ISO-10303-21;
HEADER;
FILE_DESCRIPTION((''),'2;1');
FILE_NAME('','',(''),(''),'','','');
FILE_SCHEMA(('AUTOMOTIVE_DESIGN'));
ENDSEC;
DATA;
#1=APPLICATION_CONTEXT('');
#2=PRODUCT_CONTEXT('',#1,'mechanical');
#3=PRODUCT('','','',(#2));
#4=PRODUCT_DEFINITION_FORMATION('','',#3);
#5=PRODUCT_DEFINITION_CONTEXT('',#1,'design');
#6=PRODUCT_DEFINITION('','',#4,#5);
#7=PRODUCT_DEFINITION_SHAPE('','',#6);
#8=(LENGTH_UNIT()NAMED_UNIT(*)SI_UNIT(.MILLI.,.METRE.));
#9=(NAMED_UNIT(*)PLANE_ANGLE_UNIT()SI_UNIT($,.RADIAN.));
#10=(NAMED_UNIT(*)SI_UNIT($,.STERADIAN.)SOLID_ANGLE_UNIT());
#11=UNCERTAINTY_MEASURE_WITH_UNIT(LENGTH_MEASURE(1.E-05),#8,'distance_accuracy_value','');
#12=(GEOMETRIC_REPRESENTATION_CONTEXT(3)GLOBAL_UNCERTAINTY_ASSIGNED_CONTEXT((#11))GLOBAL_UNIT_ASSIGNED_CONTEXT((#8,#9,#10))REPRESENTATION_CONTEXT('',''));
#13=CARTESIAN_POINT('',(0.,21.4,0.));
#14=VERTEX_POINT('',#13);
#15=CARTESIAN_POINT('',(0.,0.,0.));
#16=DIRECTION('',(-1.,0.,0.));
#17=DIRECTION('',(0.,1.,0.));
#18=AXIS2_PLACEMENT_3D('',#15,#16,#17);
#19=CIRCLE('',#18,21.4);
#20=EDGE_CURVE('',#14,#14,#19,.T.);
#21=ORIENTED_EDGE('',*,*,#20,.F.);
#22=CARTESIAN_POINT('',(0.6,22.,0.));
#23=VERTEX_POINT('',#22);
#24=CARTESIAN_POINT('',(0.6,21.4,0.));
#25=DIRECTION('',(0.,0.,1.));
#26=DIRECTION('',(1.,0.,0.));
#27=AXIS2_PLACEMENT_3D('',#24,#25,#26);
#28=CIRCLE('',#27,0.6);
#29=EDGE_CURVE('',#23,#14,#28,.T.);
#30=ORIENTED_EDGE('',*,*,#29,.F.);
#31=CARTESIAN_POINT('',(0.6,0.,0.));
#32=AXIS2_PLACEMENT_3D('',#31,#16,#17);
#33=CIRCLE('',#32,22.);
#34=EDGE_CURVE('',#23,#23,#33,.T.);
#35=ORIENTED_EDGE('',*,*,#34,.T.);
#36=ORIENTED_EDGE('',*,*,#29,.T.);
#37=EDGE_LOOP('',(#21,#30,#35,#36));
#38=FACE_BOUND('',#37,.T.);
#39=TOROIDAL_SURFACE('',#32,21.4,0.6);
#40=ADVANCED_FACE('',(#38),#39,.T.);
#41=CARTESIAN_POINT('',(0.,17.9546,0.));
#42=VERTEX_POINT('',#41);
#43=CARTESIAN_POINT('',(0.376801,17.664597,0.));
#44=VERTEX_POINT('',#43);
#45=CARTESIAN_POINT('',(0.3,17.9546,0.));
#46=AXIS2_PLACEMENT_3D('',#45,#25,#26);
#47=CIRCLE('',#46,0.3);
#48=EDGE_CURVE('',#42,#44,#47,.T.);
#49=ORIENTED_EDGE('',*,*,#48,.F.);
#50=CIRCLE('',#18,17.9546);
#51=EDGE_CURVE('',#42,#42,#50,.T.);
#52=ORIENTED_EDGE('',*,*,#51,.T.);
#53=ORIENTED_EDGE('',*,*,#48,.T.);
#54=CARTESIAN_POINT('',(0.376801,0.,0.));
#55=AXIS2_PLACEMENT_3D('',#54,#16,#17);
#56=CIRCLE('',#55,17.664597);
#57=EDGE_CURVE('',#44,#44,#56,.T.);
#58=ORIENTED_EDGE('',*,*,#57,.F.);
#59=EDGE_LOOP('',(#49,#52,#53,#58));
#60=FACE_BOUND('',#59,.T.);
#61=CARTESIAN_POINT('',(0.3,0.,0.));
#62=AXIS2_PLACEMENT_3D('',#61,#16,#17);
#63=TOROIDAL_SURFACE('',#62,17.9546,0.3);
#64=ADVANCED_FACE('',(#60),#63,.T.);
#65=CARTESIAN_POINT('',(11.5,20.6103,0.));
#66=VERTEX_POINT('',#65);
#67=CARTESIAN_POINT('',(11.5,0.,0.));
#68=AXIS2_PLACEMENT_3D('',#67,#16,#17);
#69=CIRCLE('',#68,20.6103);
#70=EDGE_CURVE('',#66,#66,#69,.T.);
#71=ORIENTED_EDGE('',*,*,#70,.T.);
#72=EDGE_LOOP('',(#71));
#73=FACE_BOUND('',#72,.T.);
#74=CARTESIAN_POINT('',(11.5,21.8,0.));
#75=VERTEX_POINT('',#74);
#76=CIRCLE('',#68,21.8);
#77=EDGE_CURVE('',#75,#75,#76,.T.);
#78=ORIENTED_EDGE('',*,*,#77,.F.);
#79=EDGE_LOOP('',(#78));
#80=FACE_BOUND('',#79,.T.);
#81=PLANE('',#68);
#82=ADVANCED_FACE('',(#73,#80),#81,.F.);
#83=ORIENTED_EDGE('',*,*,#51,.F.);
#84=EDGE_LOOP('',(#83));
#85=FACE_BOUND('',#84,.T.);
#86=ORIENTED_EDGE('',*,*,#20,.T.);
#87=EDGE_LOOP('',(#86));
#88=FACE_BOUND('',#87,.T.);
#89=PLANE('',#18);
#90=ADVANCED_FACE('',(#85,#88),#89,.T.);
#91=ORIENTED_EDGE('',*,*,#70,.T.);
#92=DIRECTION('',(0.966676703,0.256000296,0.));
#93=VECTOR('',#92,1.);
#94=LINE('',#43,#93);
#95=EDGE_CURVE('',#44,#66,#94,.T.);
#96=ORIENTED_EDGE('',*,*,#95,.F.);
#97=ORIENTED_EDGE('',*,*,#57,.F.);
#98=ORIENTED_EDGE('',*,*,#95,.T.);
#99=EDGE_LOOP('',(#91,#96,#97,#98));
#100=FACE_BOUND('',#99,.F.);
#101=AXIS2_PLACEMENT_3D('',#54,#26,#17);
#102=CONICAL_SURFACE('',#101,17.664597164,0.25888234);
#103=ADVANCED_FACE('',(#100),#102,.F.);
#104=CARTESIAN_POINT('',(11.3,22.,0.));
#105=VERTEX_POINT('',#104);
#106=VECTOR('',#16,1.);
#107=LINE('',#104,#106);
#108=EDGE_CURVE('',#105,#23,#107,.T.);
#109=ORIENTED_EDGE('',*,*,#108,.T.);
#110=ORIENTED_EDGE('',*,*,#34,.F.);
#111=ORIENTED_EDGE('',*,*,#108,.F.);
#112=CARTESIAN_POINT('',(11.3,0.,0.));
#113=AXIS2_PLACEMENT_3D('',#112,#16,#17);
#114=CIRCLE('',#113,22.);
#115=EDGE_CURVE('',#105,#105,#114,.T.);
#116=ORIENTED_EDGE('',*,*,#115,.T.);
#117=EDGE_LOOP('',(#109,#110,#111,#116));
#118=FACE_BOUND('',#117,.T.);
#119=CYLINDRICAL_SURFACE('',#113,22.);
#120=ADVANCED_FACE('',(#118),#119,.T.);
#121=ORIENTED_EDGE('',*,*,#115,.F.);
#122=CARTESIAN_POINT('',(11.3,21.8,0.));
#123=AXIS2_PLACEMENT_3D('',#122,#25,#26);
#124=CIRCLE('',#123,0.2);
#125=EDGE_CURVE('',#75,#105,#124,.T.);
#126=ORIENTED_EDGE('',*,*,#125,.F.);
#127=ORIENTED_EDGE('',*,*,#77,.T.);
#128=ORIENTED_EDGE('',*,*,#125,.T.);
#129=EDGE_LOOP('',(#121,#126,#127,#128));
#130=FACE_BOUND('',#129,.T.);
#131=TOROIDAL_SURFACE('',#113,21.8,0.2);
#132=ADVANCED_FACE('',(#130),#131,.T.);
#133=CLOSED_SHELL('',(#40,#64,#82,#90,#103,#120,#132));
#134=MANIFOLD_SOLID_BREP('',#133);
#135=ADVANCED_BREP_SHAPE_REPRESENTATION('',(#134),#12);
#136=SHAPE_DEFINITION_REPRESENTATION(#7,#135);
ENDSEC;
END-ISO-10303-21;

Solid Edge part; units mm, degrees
sketch "Sketch1" plane through (0, 0, 0) normal (0, 0, 1) x (1, 0, 0)
  arc A0 (0, 17.9546) -> (0.3768, 17.6646) centre (0.3, 17.9546) ccw
  line L0 (0.3768, 17.6646) -> (11.5, 20.6103)
  line L1 (11.5, 20.6103) -> (11.5, 21.8)
  arc A1 (11.5, 21.8) -> (11.3, 22) centre (11.3, 21.8) ccw
  line L2 (11.3, 22) -> (0.6, 22)
  arc A2 (0.6, 22) -> (0, 21.4) centre (0.6, 21.4) ccw
  line L3 (0, 21.4) -> (0, 17.9546)
revolve "RevolvedProtrusion1" add sketch "Sketch1" angle 360 about axis through (11.5, 0, 0) along (-1, 0, 0)
properties part number "320/22 X_or"
